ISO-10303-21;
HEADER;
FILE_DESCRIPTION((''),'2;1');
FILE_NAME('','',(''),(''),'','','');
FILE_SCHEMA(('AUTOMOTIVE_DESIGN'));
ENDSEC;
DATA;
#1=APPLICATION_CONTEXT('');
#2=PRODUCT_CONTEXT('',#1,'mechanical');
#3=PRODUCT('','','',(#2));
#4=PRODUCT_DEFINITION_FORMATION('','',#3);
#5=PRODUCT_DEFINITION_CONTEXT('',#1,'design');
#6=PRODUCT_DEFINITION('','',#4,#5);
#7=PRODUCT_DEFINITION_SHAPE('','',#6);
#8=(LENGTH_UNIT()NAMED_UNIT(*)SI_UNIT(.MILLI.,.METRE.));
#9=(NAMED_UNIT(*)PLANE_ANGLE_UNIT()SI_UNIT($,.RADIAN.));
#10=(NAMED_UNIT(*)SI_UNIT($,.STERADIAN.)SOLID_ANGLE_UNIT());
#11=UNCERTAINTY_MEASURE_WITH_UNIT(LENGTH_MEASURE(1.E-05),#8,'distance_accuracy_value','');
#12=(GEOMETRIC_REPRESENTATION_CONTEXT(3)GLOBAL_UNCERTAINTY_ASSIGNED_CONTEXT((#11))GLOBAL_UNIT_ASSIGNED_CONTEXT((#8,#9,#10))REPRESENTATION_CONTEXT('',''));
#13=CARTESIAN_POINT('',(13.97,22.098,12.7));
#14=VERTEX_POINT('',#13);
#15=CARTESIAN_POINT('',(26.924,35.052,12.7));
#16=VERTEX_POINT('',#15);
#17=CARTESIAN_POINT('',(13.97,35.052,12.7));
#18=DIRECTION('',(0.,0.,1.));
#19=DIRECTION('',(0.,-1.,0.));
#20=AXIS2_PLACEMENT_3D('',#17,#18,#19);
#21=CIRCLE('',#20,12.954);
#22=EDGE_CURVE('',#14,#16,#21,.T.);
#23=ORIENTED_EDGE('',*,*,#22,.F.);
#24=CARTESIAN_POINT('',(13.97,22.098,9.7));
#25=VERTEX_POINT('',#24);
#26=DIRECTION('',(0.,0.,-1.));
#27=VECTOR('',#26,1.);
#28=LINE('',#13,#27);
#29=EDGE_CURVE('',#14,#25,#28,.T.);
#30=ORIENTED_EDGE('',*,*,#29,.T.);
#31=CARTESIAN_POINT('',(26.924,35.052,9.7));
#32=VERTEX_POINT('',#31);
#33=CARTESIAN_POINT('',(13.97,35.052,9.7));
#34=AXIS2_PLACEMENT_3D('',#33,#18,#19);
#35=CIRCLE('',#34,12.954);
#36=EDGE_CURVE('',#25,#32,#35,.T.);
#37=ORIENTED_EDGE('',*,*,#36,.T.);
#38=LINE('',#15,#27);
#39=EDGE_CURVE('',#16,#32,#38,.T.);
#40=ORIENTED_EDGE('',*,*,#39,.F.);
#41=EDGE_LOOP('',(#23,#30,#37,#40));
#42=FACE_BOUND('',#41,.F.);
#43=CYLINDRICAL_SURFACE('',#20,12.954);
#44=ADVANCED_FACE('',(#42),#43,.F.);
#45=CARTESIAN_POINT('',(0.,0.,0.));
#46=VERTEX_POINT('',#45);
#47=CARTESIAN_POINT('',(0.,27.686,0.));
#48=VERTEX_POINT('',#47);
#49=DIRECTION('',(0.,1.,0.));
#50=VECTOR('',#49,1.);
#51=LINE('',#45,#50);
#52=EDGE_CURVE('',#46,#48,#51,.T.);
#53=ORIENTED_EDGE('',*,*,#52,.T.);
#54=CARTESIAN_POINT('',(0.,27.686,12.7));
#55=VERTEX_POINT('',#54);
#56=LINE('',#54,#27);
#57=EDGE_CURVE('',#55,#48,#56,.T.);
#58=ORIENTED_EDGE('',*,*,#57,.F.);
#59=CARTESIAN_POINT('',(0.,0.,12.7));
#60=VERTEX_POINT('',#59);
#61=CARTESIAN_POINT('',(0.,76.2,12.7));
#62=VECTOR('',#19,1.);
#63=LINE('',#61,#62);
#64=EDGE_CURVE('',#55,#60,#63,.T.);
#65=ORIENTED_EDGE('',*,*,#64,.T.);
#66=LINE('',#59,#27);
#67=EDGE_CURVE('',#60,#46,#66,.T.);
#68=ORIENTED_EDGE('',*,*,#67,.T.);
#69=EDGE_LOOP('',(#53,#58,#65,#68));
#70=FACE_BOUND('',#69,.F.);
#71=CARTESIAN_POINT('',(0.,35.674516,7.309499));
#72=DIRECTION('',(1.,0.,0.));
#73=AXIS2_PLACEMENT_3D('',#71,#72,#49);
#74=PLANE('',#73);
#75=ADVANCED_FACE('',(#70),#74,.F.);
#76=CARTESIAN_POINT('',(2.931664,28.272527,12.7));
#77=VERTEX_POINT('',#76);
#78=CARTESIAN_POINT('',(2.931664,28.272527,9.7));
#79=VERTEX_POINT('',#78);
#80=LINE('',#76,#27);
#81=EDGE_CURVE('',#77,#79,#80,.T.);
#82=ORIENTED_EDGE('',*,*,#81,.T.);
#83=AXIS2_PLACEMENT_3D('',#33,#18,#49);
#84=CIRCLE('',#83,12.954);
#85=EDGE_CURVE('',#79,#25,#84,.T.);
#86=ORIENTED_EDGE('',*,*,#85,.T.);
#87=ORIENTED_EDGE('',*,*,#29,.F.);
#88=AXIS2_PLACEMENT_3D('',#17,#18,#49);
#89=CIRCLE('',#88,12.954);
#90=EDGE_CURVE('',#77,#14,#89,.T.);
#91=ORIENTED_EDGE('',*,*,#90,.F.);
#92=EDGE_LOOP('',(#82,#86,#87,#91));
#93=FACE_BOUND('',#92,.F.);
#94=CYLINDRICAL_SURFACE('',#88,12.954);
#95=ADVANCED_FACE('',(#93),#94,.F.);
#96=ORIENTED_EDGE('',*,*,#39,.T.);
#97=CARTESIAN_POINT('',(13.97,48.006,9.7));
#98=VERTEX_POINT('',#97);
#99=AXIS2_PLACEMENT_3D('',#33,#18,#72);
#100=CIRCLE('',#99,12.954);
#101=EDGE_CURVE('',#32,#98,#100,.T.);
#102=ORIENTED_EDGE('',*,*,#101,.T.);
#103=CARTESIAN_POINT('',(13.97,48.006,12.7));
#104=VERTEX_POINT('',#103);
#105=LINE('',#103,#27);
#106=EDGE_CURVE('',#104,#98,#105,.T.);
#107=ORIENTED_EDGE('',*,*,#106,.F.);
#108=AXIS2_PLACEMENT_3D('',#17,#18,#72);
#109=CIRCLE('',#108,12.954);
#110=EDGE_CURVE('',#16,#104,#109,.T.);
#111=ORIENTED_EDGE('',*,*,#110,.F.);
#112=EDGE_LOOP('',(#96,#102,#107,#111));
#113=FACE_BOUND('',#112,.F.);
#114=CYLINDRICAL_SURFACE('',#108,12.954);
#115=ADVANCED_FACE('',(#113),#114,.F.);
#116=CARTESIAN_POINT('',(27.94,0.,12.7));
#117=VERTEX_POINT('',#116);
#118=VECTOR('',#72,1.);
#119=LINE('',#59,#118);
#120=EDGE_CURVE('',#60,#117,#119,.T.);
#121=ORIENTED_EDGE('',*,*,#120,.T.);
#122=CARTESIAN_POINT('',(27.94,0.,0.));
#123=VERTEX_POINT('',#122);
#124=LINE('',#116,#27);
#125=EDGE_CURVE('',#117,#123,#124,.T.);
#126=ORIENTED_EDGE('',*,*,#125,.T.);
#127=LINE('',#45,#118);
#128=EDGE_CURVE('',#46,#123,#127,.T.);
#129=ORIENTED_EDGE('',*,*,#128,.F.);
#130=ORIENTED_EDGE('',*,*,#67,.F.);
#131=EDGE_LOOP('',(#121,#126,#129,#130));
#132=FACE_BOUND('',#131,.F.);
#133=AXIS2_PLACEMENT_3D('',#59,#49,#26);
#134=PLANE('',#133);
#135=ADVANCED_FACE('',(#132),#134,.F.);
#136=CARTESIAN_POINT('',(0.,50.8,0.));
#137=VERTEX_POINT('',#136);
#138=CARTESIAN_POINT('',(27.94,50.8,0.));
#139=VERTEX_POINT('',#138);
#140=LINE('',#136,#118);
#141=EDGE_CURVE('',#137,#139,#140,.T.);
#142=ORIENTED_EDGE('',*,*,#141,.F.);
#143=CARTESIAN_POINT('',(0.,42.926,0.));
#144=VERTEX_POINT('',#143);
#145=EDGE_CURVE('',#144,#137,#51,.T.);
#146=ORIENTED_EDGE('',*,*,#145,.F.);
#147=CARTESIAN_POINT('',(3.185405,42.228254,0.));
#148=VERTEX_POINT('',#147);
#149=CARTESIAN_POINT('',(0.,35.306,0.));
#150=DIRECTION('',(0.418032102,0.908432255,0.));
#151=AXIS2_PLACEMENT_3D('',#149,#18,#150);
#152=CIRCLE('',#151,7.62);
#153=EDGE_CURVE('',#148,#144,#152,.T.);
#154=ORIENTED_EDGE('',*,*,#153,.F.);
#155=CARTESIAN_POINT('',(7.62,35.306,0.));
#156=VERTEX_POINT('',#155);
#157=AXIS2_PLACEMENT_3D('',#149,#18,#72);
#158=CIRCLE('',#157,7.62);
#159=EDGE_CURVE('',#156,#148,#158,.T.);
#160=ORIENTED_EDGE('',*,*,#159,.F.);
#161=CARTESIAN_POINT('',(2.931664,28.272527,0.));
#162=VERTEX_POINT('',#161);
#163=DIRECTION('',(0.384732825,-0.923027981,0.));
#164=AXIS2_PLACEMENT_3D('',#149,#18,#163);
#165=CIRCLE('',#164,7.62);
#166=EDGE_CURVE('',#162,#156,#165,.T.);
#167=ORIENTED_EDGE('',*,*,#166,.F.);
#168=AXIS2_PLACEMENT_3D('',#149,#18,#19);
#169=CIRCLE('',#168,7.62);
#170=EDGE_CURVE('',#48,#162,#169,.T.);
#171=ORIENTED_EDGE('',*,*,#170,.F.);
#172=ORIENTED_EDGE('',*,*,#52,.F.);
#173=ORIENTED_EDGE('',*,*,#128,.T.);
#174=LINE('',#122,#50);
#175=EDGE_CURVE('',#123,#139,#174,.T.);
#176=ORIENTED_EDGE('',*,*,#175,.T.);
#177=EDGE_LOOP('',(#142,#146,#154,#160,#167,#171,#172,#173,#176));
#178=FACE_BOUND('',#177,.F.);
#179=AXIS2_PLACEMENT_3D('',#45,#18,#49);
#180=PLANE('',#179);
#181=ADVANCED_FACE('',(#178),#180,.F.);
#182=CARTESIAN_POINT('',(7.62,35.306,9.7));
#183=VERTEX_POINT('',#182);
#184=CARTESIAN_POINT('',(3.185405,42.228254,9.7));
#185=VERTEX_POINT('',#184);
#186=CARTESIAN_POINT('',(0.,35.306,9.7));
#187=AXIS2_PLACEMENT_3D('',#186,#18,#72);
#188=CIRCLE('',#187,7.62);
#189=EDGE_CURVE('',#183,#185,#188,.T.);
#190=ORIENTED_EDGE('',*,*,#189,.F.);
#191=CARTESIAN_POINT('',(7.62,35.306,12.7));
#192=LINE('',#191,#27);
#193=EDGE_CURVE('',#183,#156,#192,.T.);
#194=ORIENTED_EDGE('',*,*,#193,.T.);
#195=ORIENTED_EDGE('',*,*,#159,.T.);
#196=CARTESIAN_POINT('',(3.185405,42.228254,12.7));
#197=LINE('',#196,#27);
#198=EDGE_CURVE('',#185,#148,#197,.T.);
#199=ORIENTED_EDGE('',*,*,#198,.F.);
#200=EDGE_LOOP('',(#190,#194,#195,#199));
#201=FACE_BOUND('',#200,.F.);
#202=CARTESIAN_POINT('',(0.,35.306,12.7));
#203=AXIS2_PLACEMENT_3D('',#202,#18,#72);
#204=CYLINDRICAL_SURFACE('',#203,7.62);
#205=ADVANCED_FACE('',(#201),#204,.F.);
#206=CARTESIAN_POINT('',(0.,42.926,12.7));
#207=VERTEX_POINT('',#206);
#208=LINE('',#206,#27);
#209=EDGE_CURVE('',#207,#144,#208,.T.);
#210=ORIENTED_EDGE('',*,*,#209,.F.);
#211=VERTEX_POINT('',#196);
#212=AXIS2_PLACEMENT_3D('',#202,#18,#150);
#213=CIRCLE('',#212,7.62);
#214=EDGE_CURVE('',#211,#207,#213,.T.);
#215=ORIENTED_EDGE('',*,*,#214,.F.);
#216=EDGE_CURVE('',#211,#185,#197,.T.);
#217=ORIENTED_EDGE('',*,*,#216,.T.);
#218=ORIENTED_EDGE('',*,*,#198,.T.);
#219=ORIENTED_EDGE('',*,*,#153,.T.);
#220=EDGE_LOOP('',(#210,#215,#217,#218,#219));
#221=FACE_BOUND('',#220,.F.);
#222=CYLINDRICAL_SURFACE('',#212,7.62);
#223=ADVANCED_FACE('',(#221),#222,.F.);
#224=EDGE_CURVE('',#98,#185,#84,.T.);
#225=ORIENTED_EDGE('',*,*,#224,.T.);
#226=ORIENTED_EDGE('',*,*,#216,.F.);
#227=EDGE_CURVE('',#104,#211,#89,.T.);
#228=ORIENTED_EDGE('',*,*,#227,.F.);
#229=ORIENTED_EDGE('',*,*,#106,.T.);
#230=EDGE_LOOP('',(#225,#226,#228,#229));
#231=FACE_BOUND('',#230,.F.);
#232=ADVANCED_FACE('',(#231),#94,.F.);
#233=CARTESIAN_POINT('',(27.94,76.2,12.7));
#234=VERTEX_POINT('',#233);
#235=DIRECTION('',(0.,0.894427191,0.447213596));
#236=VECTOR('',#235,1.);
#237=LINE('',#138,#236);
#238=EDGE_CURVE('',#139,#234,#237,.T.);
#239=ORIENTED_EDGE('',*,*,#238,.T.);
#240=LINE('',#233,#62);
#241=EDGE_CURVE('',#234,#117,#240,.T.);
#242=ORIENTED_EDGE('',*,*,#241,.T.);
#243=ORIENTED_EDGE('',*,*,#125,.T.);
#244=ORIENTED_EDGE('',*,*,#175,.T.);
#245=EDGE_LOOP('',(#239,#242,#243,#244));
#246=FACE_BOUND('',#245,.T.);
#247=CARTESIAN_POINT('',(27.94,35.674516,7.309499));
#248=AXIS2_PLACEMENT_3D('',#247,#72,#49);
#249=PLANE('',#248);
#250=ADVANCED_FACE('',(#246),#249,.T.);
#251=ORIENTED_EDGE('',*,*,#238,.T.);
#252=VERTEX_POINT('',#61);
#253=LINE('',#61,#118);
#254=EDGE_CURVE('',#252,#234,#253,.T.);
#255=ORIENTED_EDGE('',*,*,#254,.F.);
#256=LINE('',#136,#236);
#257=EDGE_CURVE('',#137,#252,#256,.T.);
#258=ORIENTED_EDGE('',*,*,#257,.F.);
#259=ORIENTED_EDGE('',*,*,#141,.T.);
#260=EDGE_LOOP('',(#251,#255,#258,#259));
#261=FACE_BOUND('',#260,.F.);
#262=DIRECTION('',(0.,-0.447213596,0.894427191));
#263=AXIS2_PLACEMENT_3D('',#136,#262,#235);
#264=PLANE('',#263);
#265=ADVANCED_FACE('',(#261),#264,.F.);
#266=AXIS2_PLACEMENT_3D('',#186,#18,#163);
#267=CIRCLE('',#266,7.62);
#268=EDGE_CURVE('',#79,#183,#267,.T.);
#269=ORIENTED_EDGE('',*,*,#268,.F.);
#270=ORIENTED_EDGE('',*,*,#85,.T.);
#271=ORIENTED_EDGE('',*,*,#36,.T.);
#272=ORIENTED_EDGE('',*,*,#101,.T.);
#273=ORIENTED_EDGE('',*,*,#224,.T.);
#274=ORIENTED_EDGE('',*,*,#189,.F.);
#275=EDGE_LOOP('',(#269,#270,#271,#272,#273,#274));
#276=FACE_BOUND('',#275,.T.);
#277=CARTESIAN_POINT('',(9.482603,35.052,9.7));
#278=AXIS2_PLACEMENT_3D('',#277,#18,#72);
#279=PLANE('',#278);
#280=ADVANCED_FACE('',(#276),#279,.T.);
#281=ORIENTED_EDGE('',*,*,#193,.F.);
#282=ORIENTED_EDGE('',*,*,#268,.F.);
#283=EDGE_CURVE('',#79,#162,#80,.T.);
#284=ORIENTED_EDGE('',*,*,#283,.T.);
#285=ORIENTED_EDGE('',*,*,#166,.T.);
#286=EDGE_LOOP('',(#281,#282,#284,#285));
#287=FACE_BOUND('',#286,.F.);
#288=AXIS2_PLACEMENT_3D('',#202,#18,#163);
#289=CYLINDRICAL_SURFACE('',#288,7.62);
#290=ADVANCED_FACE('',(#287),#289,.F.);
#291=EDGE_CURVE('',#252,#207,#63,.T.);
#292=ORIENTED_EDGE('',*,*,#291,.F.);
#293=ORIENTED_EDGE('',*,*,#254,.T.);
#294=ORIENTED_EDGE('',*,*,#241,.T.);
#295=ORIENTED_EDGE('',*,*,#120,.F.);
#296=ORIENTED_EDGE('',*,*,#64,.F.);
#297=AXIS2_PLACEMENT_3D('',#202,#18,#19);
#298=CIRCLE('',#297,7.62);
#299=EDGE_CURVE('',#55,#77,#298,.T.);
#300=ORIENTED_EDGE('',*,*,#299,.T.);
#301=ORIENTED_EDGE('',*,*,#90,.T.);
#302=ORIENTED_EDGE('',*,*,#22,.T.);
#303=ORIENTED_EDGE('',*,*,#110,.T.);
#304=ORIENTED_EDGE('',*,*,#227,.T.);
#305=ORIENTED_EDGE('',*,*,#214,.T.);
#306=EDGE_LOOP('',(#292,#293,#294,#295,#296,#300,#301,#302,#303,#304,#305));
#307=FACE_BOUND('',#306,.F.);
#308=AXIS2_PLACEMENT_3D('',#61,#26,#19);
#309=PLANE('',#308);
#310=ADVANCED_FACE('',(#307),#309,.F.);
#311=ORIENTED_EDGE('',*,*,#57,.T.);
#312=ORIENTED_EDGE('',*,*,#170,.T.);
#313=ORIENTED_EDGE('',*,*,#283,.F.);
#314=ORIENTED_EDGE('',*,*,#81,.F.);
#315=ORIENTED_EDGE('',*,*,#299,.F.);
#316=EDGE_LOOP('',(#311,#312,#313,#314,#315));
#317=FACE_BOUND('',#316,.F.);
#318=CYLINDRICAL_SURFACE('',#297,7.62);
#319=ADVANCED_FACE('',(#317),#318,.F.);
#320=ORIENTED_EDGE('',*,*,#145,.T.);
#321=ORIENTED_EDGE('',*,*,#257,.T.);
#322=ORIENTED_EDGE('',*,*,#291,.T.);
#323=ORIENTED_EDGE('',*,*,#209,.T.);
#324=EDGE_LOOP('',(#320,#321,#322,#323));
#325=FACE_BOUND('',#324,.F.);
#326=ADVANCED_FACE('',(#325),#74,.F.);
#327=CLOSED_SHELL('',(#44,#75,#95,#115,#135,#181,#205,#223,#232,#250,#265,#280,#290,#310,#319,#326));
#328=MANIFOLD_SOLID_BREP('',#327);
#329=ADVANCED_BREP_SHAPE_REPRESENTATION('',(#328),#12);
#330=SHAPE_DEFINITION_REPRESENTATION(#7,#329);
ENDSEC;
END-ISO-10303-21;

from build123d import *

# Parameters (mm, degrees)
F1_DEPTH = 27.94
F3_DEPTH = 3
F5_DEPTH = 25.4


with BuildPart() as f1:
    # F0 (on Right) → F1 (new body)
    with BuildSketch(Plane.YZ):
        Polygon((0, 12.7), (0, 0), (50.8, 0), (76.2, 12.7), align=None)
    extrude(amount=F1_DEPTH)

    # F2 (on face) → F3 (cut)
    with BuildSketch(Plane.XY.offset(12.7)):
        with BuildLine():
            ThreePointArc((13.97, 48.006), (1.016, 35.052), (13.97, 22.098))
            Line((13.97, 22.098), (13.97, 48.006))
        make_face()
        with BuildLine():
            Line((13.97, 48.006), (13.97, 22.098))
            ThreePointArc((13.97, 22.098), (23.1298612435, 25.8921387565), (26.924, 35.052))
            ThreePointArc((26.924, 35.052), (23.1298612435, 44.2118612435), (13.97, 48.006))
        make_face()
    extrude(amount=-F3_DEPTH, mode=Mode.SUBTRACT)

    # F4 (on face) → F5 (cut)
    with BuildSketch(Plane.XY.offset(12.7)):
        with BuildLine():
            ThreePointArc((2.9316641234, 28.2725267849), (1.0181406263, 35.2874883522), (3.1854046142, 42.2282537835))
            ThreePointArc((3.1854046142, 42.2282537835), (1.6304640704, 42.7495197934), (0, 42.926))
            Line((0, 42.926), (0, 27.686))
            ThreePointArc((0, 27.686), (1.4948802796, 27.8340703329), (2.9316641234, 28.2725267849))
        make_face()
        with BuildLine():
            ThreePointArc((2.9316641234, 28.2725267849), (6.3404921189, 31.0795878466), (7.62, 35.306))
            ThreePointArc((7.62, 35.306), (6.4162755225, 39.4164511212), (3.1854046142, 42.2282537835))
            ThreePointArc((3.1854046142, 42.2282537835), (1.0181406263, 35.2874883522), (2.9316641234, 28.2725267849))
        make_face()
    extrude(amount=-F5_DEPTH, mode=Mode.SUBTRACT)


solid = f1.part
